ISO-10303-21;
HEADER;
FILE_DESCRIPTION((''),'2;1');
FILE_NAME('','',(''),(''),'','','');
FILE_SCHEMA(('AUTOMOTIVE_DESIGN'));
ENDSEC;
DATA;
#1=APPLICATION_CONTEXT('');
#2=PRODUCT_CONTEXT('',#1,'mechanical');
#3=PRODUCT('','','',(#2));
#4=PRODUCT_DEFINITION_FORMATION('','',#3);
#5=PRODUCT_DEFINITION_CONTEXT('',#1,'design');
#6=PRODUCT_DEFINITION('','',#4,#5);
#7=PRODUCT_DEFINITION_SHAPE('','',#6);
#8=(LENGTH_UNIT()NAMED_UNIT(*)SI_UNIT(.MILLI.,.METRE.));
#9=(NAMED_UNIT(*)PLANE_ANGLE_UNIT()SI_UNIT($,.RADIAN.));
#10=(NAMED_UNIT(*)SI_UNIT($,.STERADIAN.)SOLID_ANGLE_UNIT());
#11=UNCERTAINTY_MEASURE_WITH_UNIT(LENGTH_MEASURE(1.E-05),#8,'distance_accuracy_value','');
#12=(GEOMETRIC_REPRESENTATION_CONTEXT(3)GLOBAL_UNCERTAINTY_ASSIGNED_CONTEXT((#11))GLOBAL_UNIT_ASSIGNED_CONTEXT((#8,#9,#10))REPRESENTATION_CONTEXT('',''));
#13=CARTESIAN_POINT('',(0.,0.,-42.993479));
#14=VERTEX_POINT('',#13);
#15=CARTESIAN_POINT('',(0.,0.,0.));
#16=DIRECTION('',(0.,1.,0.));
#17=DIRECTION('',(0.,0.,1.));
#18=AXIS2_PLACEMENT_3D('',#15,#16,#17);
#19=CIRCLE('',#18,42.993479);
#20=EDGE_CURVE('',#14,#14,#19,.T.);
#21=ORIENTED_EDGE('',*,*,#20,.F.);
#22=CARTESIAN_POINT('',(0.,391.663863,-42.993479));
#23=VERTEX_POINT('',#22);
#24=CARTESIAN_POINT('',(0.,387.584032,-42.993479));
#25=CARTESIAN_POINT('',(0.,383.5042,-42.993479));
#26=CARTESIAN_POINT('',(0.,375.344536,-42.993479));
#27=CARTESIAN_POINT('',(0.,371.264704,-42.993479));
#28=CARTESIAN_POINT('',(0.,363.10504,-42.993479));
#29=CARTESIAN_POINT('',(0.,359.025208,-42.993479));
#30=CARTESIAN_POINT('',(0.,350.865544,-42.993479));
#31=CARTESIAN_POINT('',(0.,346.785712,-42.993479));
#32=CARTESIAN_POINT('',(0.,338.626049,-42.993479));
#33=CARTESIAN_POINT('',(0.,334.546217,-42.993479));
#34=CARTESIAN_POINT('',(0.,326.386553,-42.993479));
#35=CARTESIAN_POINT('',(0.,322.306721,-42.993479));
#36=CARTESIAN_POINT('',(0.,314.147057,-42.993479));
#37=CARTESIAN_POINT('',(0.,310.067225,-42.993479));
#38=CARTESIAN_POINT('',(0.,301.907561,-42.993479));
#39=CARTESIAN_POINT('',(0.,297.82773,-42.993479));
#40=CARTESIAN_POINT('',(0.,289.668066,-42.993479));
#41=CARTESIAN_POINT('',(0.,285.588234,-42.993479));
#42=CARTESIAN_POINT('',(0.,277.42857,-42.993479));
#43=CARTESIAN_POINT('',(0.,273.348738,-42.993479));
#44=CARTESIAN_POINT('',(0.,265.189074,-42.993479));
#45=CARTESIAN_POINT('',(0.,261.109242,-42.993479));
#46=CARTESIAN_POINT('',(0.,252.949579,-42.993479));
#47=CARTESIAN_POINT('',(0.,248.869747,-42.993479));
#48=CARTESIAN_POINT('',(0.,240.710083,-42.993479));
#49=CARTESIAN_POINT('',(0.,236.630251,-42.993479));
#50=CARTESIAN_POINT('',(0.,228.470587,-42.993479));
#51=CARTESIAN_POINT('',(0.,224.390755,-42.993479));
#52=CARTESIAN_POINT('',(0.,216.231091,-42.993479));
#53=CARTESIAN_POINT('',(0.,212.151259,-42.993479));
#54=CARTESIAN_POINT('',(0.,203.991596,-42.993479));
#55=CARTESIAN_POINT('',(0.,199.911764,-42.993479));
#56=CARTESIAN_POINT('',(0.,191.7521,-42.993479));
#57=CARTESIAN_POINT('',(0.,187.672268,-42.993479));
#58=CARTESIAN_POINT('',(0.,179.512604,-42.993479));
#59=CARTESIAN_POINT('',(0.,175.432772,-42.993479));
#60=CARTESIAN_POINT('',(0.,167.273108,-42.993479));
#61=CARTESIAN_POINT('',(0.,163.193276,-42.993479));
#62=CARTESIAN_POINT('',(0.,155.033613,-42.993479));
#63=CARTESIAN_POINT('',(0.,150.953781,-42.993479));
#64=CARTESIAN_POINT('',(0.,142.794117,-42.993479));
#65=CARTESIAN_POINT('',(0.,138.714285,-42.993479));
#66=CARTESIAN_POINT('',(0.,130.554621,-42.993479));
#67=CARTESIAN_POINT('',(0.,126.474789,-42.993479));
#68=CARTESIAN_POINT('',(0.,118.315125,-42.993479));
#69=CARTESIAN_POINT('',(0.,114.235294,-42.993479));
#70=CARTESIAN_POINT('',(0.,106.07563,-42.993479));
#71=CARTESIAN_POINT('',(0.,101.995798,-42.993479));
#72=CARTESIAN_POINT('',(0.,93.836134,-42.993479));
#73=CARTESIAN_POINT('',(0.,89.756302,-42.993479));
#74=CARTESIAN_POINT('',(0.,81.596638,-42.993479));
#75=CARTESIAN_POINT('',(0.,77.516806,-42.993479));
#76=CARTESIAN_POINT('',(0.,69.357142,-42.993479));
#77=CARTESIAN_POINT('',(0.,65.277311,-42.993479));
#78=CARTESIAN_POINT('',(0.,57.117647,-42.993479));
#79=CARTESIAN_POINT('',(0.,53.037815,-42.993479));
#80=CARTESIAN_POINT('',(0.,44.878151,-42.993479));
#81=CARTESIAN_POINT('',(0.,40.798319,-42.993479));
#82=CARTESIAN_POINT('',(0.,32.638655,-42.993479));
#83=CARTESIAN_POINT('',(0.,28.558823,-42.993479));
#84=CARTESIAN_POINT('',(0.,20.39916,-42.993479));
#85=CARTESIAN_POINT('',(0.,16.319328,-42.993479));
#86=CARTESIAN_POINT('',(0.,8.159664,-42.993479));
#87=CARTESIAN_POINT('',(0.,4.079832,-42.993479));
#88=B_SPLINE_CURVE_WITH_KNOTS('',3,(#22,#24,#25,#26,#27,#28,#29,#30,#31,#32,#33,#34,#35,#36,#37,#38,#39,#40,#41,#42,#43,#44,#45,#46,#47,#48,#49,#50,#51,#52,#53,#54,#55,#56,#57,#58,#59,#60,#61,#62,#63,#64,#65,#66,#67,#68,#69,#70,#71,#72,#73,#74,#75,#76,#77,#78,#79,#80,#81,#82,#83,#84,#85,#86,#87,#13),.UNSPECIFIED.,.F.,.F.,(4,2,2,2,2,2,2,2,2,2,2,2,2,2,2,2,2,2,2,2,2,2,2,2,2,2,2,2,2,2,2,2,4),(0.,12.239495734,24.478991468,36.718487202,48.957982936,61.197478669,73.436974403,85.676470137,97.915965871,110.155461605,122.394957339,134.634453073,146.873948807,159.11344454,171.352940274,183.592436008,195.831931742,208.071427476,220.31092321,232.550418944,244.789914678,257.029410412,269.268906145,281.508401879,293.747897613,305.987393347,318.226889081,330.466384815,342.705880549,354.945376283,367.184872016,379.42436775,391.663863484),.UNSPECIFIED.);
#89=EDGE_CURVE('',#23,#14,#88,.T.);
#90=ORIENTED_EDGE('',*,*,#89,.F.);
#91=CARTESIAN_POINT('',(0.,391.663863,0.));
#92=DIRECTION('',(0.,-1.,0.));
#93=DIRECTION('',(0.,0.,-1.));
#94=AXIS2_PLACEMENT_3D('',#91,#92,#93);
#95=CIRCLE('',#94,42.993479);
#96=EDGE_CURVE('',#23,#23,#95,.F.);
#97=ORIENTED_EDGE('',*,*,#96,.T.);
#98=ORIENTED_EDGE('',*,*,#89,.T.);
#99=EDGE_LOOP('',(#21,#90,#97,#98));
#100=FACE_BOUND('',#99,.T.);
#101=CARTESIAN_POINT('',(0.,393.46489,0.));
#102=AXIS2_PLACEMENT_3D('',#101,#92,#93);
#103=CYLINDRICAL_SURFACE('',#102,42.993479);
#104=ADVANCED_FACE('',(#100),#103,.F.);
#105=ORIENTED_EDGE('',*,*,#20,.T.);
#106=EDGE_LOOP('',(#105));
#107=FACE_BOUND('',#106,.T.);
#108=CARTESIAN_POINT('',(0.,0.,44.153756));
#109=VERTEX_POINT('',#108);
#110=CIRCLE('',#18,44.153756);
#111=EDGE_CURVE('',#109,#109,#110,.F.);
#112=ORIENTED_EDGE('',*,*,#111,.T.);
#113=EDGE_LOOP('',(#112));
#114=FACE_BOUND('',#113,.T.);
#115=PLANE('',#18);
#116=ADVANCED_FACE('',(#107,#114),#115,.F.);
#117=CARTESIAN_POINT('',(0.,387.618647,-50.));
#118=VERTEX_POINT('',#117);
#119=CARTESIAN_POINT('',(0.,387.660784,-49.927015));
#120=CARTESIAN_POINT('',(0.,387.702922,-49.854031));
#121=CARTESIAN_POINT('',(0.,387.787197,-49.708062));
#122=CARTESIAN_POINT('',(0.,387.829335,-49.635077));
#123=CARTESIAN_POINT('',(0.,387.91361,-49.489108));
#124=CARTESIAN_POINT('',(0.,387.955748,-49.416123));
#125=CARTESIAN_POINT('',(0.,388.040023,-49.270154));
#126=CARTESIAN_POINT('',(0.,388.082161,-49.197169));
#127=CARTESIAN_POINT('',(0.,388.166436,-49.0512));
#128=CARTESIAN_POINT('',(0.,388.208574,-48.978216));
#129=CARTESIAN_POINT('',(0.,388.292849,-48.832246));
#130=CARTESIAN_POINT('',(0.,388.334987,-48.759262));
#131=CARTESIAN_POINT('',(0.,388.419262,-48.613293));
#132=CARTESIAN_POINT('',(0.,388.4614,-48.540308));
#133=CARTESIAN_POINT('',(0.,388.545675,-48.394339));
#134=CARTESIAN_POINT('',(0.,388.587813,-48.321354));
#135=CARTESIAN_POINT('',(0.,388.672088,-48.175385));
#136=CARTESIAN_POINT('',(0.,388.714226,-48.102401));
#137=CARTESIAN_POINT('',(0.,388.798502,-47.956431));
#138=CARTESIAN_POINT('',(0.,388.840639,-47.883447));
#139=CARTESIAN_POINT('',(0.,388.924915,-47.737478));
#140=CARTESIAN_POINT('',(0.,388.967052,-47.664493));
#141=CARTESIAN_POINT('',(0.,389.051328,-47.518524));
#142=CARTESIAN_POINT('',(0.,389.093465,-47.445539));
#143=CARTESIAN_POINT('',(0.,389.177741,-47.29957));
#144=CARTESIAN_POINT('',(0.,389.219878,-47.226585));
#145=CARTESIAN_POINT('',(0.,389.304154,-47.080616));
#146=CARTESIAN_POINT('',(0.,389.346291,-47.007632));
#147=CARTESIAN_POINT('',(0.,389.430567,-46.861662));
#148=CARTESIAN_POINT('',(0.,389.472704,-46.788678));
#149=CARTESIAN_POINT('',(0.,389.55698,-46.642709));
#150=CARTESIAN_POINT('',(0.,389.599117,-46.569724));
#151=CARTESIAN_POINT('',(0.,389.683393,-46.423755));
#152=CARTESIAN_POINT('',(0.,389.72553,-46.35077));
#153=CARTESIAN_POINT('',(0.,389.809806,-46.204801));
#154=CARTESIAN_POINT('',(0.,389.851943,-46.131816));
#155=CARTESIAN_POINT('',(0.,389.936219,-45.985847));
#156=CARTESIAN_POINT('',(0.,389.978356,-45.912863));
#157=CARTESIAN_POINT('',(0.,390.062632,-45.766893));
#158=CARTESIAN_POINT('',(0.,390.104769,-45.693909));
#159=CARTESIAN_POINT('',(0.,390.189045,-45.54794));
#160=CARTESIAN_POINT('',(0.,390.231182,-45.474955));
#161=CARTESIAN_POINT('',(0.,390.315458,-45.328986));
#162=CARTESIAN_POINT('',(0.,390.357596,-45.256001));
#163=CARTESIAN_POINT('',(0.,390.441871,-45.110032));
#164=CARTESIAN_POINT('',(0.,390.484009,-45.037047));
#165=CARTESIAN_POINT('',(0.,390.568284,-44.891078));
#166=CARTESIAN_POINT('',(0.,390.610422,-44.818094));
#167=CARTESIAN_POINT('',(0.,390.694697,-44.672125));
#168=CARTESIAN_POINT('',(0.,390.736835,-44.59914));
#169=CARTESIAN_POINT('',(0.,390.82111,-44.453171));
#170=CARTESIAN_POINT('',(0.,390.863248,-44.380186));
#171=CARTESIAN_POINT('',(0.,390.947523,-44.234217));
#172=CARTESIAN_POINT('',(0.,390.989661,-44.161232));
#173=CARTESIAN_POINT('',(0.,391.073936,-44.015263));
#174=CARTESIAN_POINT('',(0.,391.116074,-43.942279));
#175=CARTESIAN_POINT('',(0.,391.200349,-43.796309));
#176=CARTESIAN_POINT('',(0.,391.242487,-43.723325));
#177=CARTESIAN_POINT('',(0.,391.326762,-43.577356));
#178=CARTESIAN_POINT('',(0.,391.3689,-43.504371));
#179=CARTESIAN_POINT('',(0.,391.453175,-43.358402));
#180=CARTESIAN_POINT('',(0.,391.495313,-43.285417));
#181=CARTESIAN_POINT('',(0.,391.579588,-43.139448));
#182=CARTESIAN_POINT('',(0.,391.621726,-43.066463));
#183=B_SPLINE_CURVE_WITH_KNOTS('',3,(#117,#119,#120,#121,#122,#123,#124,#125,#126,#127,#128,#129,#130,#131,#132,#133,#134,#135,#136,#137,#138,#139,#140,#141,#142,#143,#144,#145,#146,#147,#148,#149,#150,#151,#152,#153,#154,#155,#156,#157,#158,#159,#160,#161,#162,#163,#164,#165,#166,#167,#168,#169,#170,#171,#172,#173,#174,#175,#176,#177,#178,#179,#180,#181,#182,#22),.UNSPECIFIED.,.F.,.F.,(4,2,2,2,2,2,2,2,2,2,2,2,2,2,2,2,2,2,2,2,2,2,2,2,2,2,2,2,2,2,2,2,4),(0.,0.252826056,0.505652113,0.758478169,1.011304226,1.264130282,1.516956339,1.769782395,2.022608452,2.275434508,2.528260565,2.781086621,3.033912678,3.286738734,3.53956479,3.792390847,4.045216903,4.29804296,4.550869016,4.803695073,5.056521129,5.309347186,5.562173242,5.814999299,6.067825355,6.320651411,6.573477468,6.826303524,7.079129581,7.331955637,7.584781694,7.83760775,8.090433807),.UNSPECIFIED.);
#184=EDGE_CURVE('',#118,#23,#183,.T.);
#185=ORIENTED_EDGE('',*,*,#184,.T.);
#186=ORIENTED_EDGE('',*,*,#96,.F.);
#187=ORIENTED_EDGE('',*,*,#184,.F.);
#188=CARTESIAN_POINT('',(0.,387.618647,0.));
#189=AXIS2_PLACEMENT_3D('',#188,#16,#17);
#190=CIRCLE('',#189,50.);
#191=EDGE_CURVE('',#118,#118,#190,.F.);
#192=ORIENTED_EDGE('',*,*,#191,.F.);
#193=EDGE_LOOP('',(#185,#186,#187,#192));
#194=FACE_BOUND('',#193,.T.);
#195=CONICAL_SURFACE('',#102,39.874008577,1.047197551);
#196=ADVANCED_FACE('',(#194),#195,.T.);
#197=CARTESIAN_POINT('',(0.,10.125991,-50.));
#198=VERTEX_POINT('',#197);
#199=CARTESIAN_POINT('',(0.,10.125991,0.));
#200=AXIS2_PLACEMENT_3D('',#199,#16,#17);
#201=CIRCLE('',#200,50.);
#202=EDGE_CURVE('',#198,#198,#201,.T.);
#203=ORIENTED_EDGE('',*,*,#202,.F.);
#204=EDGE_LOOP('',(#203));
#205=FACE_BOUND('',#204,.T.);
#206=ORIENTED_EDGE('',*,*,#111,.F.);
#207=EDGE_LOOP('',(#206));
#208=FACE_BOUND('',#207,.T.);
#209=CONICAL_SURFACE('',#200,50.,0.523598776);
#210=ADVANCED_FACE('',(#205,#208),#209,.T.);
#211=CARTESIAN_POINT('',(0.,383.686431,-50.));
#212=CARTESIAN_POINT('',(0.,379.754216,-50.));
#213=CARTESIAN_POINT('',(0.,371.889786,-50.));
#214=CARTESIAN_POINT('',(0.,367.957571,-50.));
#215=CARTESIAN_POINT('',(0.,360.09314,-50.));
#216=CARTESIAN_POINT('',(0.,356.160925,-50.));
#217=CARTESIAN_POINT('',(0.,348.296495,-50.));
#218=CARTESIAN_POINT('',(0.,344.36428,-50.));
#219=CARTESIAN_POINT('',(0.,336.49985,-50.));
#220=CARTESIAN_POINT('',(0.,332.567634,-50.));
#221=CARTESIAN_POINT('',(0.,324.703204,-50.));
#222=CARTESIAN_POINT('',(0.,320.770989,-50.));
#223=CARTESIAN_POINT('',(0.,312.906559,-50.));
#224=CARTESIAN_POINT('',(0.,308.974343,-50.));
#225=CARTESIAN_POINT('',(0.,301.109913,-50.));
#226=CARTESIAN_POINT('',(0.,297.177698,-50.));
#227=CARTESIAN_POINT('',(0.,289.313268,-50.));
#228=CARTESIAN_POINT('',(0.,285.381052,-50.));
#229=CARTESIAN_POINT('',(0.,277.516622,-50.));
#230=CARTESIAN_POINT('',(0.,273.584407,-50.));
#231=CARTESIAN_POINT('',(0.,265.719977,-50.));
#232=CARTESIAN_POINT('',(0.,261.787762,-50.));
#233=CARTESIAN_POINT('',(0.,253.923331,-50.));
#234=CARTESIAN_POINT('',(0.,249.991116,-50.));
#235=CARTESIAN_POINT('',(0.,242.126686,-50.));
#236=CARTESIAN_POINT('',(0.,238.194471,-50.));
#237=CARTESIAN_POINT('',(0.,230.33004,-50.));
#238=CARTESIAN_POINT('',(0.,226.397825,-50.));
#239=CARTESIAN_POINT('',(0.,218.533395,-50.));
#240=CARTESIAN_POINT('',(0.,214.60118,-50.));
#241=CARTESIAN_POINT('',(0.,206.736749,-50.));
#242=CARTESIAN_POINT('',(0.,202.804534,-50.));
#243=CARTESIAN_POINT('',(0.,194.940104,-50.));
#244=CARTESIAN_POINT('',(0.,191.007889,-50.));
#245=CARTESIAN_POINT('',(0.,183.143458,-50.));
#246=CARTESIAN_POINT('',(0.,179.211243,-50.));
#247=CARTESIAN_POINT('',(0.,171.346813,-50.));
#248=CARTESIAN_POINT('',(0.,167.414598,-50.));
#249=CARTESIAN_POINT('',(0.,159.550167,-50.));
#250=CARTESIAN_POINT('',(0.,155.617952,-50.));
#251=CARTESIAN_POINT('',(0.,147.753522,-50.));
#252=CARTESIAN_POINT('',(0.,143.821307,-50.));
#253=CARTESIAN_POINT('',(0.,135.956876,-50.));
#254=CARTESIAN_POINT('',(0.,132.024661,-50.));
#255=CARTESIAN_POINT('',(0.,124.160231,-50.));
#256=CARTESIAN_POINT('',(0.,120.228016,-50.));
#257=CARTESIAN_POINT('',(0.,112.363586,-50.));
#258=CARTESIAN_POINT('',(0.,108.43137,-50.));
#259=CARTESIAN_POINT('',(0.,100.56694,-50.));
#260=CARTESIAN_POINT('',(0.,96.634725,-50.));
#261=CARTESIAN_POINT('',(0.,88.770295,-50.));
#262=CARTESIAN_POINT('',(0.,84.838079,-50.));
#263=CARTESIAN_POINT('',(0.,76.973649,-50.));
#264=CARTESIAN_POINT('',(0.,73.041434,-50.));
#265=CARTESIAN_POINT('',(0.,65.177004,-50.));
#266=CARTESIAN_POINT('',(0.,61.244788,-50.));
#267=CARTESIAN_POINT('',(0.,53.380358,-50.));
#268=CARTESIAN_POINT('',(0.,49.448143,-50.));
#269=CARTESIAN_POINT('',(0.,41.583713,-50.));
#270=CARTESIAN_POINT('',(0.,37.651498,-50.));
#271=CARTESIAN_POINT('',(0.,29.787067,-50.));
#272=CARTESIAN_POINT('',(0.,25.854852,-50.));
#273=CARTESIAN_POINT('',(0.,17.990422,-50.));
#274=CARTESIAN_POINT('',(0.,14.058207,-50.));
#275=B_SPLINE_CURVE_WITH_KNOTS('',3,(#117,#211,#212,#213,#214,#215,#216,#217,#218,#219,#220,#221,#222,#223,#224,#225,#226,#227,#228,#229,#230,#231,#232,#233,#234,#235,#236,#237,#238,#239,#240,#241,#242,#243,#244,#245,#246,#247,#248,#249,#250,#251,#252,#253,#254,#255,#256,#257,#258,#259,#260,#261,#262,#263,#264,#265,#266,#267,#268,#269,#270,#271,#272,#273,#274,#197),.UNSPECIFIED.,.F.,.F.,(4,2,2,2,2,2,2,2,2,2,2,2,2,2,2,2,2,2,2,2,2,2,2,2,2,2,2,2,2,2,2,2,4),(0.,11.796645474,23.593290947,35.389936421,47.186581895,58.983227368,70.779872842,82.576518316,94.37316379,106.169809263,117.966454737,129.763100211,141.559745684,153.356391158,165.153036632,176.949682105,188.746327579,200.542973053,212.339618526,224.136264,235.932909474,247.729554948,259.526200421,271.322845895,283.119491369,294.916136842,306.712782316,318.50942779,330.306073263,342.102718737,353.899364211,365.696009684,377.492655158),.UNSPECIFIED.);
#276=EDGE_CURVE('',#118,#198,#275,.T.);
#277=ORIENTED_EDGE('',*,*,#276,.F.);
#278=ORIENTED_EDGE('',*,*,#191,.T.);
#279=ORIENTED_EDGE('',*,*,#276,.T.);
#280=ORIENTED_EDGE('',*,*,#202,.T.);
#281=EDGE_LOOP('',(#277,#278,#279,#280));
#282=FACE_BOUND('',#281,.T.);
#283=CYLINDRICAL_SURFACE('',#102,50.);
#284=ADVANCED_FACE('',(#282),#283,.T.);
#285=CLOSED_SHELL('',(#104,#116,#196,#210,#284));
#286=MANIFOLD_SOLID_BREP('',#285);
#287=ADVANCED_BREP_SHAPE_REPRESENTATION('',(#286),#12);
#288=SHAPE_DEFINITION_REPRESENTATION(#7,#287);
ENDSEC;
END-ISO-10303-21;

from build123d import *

# Parameters (mm, degrees)
SKETCH1_R           = 50
BOSS_EXTRUDE1_DEPTH = 393.46489
SKETCH2_R           = 42.993478796
CUT_EXTRUDE1_DEPTH  = 400.768207419
CHAMFER1_SIZE       = 5.846244
CHAMFER1_SIZE_2     = 10.125991


with BuildPart() as part:
    # Sketch1 → Boss-Extrude1 (new body)
    with BuildSketch(Plane(origin=(0, 0, 0), x_dir=(1, 0, 0), z_dir=(0, 1, 0))):
        with Locations(Location((0, 0, 0), (0, 0, 90))):
            Circle(SKETCH1_R)
    extrude(amount=BOSS_EXTRUDE1_DEPTH)

    # Sketch2 → Cut-Extrude1 (cut, through all)
    with BuildSketch(Plane(origin=(0, 0, 0), x_dir=(1, 0, 0), z_dir=(0, 1, 0))):
        with Locations(Location((0, 0, 0), (0, 0, 90))):
            Circle(SKETCH2_R)
    extrude(amount=CUT_EXTRUDE1_DEPTH, mode=Mode.SUBTRACT)

    # Chamfer1
    # the kernel refuses this chamfer: 10.125991, 5.846244 mm, written as the material it takes off along each edge
    with BuildSketch(Plane(origin=(0, 393.46489, 0), x_dir=(0, 0, -1), z_dir=(1, 0, 0))) as chamfer1_piece_1:
        Polygon((50, -CHAMFER1_SIZE), (50 - CHAMFER1_SIZE_2, 0), (50, 0), align=None)
    revolve(axis=Axis((0, 393.46489, 0), (0, 1, 0)), mode=Mode.SUBTRACT)
    with BuildSketch(Plane(origin=(0, 0, 0), x_dir=(0, 0, -1), z_dir=(1, 0, 0))) as chamfer1_piece_2:
        Polygon((50, CHAMFER1_SIZE_2), (50 - CHAMFER1_SIZE, 0), (50, 0), align=None)
    revolve(axis=Axis((0, 0, 0), (0, 1, 0)), mode=Mode.SUBTRACT)


solid = part.part
